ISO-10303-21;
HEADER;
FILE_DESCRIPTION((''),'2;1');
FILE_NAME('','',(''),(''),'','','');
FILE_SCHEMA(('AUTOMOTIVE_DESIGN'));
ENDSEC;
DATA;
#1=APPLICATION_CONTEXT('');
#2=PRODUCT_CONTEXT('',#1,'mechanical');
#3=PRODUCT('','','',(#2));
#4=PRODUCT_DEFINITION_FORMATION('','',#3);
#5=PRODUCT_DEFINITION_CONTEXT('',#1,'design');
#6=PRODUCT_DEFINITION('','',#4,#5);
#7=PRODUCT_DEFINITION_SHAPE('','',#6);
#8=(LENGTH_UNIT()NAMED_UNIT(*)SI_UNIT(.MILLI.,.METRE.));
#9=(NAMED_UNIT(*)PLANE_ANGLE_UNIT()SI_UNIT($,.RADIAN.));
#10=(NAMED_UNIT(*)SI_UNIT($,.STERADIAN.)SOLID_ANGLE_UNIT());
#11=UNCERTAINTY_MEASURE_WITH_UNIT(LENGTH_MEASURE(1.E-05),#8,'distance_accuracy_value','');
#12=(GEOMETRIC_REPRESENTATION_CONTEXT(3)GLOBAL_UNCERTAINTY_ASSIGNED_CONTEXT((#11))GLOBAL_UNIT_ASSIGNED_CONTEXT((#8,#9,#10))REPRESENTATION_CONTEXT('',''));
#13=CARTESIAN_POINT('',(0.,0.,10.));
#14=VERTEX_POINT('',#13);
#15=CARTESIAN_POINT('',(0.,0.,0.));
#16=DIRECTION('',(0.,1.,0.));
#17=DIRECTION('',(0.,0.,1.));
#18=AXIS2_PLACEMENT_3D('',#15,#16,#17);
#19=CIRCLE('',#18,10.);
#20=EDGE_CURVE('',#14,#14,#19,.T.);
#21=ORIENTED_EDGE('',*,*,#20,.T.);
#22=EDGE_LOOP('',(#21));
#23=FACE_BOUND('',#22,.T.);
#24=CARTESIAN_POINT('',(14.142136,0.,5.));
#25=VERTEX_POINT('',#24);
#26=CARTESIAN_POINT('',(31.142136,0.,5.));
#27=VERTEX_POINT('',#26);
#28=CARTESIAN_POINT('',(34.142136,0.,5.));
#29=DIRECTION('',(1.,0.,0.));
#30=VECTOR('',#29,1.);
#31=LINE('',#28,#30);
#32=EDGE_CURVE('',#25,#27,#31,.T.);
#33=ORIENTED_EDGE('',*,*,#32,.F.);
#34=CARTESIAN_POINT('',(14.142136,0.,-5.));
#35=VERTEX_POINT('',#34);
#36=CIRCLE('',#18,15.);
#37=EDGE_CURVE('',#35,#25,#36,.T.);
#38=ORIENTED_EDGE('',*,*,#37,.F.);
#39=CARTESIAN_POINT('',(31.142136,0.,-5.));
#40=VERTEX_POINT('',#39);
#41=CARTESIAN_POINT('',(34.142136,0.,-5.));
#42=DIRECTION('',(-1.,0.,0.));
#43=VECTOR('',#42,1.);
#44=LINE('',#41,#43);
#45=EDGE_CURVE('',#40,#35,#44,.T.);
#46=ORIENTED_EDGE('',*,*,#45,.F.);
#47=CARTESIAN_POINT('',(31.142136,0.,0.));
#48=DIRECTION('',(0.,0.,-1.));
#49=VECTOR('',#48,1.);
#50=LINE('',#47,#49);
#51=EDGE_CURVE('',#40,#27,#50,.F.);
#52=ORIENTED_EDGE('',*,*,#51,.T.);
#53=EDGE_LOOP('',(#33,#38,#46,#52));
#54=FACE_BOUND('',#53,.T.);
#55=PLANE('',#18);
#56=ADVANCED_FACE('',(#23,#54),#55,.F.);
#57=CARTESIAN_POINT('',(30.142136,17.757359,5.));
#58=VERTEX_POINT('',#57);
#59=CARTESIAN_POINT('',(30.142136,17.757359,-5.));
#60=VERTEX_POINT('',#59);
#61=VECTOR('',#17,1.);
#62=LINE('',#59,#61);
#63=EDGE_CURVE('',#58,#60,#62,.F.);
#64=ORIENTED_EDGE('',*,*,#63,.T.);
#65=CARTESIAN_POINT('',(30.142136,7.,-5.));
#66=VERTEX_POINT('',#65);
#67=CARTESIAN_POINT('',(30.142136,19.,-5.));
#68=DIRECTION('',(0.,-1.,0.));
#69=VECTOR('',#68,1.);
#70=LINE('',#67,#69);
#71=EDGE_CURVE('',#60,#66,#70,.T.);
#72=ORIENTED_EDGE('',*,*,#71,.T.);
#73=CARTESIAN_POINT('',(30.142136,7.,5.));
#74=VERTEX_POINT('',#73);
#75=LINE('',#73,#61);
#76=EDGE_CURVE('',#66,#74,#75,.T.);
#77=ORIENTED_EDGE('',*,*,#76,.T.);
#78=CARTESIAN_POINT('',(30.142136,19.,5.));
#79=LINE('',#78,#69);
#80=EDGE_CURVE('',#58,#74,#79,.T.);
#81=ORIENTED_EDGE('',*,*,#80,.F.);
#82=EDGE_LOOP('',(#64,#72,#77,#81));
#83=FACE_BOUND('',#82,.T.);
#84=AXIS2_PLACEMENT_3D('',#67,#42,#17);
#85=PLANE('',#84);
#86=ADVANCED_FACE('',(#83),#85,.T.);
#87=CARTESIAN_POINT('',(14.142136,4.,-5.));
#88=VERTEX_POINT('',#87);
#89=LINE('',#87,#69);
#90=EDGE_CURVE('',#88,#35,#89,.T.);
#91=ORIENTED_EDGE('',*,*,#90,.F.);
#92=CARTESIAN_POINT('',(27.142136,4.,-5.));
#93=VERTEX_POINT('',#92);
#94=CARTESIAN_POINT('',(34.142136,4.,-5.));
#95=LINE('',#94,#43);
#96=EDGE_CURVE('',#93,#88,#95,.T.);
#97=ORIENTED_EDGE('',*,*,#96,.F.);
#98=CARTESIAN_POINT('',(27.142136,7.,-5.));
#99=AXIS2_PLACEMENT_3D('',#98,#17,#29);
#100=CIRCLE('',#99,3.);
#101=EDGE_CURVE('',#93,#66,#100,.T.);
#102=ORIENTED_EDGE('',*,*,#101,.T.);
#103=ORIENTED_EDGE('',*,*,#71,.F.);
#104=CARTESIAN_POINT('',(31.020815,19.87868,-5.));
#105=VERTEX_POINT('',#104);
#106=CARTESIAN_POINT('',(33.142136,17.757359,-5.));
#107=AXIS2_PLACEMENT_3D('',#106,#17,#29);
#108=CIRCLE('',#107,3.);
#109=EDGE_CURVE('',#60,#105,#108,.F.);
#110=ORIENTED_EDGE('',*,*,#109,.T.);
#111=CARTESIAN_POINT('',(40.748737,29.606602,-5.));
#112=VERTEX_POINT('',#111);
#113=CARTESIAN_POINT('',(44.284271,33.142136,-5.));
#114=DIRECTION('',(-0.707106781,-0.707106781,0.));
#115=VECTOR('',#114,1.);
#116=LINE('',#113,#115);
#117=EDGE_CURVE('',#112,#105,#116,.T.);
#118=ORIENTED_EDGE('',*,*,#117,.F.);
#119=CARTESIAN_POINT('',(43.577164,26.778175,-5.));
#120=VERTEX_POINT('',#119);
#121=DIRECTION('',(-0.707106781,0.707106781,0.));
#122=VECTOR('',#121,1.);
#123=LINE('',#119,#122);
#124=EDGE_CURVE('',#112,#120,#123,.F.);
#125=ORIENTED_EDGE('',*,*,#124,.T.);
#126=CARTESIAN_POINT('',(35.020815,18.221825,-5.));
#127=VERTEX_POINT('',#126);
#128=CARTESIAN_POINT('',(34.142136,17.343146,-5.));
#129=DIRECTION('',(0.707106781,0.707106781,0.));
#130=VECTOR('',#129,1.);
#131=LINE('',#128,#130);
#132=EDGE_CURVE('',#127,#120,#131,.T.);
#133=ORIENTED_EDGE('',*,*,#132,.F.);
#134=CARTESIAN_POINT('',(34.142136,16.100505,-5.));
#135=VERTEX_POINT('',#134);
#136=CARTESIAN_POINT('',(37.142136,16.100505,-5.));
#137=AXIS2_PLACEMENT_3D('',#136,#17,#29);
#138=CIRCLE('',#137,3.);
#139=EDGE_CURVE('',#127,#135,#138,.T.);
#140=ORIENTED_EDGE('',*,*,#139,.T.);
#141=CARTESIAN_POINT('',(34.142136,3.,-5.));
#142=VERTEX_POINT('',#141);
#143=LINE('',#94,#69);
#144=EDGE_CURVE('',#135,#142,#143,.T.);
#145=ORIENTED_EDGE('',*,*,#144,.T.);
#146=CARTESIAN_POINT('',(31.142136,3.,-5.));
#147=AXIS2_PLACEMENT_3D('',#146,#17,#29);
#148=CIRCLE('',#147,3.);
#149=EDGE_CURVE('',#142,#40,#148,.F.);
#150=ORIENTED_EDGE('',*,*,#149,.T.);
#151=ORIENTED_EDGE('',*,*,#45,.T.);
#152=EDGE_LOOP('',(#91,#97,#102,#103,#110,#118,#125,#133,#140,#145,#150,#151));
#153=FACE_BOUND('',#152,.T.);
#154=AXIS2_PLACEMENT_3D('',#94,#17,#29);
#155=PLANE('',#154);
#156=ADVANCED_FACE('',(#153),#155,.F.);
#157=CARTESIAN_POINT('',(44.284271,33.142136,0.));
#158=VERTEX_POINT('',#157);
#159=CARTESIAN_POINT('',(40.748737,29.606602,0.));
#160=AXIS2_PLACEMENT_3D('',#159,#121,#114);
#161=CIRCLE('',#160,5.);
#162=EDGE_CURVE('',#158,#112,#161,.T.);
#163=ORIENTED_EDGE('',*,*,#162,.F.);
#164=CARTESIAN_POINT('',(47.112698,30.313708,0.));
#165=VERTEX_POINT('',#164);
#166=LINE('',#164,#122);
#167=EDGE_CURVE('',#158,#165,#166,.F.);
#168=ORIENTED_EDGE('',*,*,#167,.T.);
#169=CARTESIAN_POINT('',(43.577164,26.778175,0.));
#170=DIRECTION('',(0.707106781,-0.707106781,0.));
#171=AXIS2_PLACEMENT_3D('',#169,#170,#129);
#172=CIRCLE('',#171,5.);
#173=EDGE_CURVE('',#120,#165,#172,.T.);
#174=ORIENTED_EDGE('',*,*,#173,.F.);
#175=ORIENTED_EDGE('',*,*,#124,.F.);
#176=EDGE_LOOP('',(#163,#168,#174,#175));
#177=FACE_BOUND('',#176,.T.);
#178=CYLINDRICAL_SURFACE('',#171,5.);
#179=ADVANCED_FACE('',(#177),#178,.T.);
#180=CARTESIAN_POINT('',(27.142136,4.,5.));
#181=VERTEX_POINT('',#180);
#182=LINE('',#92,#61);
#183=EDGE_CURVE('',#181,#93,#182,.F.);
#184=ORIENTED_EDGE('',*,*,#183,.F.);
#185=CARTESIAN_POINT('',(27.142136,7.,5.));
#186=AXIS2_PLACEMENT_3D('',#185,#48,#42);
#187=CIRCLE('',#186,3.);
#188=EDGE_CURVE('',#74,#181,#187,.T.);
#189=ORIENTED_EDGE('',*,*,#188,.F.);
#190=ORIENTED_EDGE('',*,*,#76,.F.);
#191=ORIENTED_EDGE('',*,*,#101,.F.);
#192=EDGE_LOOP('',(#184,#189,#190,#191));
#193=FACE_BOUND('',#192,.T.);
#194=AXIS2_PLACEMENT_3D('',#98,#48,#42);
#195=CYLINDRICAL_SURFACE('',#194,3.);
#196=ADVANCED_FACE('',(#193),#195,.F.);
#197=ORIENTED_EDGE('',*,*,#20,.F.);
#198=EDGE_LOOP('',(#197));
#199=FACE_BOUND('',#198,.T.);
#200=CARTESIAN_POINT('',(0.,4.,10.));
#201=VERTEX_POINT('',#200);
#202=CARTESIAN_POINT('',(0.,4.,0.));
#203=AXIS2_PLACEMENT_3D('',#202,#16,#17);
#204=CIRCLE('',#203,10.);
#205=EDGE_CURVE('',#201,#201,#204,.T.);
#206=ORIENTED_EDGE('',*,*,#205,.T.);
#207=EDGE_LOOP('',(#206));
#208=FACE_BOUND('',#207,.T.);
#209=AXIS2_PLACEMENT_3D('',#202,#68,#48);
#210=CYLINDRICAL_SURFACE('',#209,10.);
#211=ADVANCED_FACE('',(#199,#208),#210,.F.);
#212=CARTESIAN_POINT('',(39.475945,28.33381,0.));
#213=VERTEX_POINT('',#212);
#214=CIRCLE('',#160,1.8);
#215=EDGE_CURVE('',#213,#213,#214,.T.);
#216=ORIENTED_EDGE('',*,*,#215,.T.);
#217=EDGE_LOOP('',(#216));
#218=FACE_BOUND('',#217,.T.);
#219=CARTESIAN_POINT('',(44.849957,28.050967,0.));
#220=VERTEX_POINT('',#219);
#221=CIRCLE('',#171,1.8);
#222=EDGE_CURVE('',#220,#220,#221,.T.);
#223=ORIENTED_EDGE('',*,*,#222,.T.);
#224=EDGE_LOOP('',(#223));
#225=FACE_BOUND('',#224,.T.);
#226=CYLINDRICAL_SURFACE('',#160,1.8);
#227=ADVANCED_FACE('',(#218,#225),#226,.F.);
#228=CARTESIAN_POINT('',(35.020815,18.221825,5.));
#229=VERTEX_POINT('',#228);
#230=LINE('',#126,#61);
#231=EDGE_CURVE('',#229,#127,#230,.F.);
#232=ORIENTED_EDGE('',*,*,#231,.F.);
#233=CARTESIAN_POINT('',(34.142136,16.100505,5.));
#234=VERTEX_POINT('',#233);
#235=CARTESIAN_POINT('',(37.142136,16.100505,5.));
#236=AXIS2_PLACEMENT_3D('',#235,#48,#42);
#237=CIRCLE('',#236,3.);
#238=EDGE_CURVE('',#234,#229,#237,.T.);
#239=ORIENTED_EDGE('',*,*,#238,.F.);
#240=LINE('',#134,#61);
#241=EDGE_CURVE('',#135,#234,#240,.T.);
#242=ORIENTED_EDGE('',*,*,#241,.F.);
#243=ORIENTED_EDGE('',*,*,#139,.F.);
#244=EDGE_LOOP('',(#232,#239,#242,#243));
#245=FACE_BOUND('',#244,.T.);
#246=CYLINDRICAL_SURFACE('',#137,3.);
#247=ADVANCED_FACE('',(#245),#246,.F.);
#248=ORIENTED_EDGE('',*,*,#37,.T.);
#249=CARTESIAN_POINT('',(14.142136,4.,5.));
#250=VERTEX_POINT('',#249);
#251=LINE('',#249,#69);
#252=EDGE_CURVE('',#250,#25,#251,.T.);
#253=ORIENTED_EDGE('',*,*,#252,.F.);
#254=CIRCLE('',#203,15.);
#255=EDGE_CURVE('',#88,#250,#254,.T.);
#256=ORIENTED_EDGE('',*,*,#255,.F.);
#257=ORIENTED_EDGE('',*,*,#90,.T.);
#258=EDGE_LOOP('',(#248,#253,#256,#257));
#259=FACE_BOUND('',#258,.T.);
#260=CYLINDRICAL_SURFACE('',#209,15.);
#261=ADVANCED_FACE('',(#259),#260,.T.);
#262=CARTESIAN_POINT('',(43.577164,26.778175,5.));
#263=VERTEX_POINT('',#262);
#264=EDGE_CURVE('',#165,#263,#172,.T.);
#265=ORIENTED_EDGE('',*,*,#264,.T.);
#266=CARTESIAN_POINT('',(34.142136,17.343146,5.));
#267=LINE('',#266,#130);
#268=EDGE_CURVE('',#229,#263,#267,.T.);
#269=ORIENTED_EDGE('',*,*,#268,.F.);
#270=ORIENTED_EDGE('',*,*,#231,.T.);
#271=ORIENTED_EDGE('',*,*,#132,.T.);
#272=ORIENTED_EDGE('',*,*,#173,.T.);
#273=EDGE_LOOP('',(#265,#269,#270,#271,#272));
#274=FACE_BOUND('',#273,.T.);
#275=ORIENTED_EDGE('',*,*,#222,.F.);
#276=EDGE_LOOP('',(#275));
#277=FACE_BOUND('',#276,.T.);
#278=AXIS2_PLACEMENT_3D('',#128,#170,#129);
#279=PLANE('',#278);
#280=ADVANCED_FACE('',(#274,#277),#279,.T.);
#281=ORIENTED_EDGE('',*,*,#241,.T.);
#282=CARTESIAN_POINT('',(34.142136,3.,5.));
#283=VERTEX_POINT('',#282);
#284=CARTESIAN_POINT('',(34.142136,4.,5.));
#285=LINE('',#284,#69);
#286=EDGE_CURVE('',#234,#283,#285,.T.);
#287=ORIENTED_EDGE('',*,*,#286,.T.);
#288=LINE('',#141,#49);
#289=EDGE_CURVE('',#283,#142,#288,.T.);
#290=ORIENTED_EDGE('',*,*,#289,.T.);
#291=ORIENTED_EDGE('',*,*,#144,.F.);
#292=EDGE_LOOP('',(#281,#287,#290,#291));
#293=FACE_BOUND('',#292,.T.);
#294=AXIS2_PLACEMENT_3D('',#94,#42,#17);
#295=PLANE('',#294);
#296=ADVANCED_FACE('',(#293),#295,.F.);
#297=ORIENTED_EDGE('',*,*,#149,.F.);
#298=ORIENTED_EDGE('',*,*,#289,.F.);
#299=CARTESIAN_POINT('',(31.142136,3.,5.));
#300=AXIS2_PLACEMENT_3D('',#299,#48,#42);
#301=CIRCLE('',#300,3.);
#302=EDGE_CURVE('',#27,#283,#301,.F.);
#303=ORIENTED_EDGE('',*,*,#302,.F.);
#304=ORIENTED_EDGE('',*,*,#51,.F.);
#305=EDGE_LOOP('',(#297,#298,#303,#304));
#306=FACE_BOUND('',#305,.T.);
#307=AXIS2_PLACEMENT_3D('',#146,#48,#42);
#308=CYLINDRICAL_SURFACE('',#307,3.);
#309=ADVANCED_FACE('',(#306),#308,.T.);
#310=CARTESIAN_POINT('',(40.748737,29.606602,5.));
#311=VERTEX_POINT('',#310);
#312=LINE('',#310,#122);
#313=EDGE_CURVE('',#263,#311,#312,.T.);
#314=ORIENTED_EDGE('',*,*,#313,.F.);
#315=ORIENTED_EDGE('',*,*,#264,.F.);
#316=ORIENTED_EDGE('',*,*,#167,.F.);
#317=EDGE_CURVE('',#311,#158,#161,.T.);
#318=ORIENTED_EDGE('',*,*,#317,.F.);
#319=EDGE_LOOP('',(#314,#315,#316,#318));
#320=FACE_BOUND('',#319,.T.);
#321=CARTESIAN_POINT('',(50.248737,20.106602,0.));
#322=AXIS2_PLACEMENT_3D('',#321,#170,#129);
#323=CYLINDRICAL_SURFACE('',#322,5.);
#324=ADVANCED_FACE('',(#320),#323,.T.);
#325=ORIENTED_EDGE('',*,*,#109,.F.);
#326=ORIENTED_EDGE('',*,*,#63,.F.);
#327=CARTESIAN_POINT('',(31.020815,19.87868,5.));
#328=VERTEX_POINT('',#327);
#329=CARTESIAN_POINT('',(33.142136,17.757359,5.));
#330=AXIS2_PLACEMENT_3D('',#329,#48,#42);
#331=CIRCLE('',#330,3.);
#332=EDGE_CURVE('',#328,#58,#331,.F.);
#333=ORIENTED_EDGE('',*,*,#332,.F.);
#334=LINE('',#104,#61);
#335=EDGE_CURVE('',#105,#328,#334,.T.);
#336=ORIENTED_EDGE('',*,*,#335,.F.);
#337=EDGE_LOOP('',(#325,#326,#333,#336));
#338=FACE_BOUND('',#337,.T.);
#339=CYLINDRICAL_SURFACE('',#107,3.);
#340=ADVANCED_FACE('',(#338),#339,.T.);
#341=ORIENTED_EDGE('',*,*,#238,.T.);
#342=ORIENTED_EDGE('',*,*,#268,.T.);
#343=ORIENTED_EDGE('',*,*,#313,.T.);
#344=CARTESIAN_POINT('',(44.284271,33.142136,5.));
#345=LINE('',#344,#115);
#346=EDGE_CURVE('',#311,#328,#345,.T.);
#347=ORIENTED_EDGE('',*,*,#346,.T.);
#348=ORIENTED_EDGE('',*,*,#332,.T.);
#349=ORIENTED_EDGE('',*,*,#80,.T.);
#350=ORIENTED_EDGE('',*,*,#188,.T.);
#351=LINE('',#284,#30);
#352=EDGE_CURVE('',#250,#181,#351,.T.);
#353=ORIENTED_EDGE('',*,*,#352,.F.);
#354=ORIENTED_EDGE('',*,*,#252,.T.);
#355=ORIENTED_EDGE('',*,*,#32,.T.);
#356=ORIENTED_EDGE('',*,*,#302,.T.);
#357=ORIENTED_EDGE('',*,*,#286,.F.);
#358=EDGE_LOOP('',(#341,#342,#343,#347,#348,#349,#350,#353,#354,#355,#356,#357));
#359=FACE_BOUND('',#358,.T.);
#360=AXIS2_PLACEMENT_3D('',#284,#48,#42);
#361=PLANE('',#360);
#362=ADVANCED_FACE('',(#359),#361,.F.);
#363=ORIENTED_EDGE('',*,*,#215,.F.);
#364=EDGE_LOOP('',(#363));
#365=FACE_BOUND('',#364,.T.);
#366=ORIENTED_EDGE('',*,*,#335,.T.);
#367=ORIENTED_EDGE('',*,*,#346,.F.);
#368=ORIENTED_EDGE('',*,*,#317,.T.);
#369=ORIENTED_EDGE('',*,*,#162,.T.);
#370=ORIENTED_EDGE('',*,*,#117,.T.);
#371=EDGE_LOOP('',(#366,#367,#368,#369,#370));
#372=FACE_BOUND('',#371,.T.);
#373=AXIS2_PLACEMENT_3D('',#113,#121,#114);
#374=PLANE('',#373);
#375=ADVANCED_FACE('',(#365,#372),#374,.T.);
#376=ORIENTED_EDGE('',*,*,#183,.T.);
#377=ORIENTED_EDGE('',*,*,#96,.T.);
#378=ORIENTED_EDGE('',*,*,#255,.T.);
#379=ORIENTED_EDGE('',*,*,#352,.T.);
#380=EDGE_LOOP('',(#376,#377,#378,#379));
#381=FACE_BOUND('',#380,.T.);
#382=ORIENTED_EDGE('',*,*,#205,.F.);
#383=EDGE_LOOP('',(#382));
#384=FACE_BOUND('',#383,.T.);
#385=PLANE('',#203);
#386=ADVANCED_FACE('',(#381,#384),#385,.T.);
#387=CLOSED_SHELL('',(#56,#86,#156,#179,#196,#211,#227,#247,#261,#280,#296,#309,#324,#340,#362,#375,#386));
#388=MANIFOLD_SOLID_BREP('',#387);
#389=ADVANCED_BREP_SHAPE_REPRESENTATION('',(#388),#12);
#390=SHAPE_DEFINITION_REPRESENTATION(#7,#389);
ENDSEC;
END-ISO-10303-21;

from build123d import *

# Parameters (mm, degrees)
SKETCH2_R            = 10
BOSS_EXTRUDE1_DEPTH  = 4
BOSS_EXTRUDE2_DEPTH  = 10
FILLET1_R            = 5
M3_CLEARANCE_HOLE1_D = 3.6
FILLET2_R            = 3


with BuildPart() as part:
    # Sketch2 → Boss-Extrude1 (new body)
    with BuildSketch(Plane(origin=(0, 0, 0), x_dir=(1, 0, 0), z_dir=(0, 1, 0))):
        with BuildLine():
            Line((34.142135624, 5), (34.142135624, -5))
            Line((34.142135624, -5), (14.142135624, -5))
            ThreePointArc((14.142135624, -5), (-15, 0), (14.142135624, 5))
            Line((14.142135624, 5), (34.142135624, 5))
        make_face()
        with Locations(Location((0, 0, 0), (0, 0, 270))):
            Circle(SKETCH2_R, mode=Mode.SUBTRACT)
    extrude(amount=BOSS_EXTRUDE1_DEPTH)

    # Sketch3 → Boss-Extrude2 (add)
    with BuildSketch(Plane.XY.offset(5)):
        Polygon((34.142135624, 4), (34.142135624, 17.343145751), (47.112698372, 30.313708499), (44.284271247, 33.142135624), (30.142135624, 19), (30.142135624, 4), align=None)
    extrude(amount=-BOSS_EXTRUDE2_DEPTH)

    # Fillet1
    fillet1_edges = [part.edges().sort_by_distance(p)[0] for p in [
        (45.69848481, 31.727922061, 5),
        (45.69848481, 31.727922061, -5),
    ]]
    fillet(fillet1_edges, radius=FILLET1_R - 0.0001)  # a hair under: the kernel refuses the full size

    # M3 Clearance Hole1 (through all)
    with Locations(Plane(origin=(5.571067812, -5.571067812, 0), x_dir=(0.7071067811865489, 0.7071067811865462, 0), z_dir=(-0.7071067811865462, 0.7071067811865489, 0))):
        with Locations((49.748737342, 0)):
            Hole(M3_CLEARANCE_HOLE1_D / 2)

    # Fillet2
    fillet2_edges = [part.edges().sort_by_distance(p)[0] for p in [
        (30.142135624, 4, 0),
        (30.142135624, 19, 0),
        (34.142135624, 17.343145751, 0),
        (34.142135624, 0, 0),
    ]]
    fillet(fillet2_edges, radius=FILLET2_R)


solid = part.part
